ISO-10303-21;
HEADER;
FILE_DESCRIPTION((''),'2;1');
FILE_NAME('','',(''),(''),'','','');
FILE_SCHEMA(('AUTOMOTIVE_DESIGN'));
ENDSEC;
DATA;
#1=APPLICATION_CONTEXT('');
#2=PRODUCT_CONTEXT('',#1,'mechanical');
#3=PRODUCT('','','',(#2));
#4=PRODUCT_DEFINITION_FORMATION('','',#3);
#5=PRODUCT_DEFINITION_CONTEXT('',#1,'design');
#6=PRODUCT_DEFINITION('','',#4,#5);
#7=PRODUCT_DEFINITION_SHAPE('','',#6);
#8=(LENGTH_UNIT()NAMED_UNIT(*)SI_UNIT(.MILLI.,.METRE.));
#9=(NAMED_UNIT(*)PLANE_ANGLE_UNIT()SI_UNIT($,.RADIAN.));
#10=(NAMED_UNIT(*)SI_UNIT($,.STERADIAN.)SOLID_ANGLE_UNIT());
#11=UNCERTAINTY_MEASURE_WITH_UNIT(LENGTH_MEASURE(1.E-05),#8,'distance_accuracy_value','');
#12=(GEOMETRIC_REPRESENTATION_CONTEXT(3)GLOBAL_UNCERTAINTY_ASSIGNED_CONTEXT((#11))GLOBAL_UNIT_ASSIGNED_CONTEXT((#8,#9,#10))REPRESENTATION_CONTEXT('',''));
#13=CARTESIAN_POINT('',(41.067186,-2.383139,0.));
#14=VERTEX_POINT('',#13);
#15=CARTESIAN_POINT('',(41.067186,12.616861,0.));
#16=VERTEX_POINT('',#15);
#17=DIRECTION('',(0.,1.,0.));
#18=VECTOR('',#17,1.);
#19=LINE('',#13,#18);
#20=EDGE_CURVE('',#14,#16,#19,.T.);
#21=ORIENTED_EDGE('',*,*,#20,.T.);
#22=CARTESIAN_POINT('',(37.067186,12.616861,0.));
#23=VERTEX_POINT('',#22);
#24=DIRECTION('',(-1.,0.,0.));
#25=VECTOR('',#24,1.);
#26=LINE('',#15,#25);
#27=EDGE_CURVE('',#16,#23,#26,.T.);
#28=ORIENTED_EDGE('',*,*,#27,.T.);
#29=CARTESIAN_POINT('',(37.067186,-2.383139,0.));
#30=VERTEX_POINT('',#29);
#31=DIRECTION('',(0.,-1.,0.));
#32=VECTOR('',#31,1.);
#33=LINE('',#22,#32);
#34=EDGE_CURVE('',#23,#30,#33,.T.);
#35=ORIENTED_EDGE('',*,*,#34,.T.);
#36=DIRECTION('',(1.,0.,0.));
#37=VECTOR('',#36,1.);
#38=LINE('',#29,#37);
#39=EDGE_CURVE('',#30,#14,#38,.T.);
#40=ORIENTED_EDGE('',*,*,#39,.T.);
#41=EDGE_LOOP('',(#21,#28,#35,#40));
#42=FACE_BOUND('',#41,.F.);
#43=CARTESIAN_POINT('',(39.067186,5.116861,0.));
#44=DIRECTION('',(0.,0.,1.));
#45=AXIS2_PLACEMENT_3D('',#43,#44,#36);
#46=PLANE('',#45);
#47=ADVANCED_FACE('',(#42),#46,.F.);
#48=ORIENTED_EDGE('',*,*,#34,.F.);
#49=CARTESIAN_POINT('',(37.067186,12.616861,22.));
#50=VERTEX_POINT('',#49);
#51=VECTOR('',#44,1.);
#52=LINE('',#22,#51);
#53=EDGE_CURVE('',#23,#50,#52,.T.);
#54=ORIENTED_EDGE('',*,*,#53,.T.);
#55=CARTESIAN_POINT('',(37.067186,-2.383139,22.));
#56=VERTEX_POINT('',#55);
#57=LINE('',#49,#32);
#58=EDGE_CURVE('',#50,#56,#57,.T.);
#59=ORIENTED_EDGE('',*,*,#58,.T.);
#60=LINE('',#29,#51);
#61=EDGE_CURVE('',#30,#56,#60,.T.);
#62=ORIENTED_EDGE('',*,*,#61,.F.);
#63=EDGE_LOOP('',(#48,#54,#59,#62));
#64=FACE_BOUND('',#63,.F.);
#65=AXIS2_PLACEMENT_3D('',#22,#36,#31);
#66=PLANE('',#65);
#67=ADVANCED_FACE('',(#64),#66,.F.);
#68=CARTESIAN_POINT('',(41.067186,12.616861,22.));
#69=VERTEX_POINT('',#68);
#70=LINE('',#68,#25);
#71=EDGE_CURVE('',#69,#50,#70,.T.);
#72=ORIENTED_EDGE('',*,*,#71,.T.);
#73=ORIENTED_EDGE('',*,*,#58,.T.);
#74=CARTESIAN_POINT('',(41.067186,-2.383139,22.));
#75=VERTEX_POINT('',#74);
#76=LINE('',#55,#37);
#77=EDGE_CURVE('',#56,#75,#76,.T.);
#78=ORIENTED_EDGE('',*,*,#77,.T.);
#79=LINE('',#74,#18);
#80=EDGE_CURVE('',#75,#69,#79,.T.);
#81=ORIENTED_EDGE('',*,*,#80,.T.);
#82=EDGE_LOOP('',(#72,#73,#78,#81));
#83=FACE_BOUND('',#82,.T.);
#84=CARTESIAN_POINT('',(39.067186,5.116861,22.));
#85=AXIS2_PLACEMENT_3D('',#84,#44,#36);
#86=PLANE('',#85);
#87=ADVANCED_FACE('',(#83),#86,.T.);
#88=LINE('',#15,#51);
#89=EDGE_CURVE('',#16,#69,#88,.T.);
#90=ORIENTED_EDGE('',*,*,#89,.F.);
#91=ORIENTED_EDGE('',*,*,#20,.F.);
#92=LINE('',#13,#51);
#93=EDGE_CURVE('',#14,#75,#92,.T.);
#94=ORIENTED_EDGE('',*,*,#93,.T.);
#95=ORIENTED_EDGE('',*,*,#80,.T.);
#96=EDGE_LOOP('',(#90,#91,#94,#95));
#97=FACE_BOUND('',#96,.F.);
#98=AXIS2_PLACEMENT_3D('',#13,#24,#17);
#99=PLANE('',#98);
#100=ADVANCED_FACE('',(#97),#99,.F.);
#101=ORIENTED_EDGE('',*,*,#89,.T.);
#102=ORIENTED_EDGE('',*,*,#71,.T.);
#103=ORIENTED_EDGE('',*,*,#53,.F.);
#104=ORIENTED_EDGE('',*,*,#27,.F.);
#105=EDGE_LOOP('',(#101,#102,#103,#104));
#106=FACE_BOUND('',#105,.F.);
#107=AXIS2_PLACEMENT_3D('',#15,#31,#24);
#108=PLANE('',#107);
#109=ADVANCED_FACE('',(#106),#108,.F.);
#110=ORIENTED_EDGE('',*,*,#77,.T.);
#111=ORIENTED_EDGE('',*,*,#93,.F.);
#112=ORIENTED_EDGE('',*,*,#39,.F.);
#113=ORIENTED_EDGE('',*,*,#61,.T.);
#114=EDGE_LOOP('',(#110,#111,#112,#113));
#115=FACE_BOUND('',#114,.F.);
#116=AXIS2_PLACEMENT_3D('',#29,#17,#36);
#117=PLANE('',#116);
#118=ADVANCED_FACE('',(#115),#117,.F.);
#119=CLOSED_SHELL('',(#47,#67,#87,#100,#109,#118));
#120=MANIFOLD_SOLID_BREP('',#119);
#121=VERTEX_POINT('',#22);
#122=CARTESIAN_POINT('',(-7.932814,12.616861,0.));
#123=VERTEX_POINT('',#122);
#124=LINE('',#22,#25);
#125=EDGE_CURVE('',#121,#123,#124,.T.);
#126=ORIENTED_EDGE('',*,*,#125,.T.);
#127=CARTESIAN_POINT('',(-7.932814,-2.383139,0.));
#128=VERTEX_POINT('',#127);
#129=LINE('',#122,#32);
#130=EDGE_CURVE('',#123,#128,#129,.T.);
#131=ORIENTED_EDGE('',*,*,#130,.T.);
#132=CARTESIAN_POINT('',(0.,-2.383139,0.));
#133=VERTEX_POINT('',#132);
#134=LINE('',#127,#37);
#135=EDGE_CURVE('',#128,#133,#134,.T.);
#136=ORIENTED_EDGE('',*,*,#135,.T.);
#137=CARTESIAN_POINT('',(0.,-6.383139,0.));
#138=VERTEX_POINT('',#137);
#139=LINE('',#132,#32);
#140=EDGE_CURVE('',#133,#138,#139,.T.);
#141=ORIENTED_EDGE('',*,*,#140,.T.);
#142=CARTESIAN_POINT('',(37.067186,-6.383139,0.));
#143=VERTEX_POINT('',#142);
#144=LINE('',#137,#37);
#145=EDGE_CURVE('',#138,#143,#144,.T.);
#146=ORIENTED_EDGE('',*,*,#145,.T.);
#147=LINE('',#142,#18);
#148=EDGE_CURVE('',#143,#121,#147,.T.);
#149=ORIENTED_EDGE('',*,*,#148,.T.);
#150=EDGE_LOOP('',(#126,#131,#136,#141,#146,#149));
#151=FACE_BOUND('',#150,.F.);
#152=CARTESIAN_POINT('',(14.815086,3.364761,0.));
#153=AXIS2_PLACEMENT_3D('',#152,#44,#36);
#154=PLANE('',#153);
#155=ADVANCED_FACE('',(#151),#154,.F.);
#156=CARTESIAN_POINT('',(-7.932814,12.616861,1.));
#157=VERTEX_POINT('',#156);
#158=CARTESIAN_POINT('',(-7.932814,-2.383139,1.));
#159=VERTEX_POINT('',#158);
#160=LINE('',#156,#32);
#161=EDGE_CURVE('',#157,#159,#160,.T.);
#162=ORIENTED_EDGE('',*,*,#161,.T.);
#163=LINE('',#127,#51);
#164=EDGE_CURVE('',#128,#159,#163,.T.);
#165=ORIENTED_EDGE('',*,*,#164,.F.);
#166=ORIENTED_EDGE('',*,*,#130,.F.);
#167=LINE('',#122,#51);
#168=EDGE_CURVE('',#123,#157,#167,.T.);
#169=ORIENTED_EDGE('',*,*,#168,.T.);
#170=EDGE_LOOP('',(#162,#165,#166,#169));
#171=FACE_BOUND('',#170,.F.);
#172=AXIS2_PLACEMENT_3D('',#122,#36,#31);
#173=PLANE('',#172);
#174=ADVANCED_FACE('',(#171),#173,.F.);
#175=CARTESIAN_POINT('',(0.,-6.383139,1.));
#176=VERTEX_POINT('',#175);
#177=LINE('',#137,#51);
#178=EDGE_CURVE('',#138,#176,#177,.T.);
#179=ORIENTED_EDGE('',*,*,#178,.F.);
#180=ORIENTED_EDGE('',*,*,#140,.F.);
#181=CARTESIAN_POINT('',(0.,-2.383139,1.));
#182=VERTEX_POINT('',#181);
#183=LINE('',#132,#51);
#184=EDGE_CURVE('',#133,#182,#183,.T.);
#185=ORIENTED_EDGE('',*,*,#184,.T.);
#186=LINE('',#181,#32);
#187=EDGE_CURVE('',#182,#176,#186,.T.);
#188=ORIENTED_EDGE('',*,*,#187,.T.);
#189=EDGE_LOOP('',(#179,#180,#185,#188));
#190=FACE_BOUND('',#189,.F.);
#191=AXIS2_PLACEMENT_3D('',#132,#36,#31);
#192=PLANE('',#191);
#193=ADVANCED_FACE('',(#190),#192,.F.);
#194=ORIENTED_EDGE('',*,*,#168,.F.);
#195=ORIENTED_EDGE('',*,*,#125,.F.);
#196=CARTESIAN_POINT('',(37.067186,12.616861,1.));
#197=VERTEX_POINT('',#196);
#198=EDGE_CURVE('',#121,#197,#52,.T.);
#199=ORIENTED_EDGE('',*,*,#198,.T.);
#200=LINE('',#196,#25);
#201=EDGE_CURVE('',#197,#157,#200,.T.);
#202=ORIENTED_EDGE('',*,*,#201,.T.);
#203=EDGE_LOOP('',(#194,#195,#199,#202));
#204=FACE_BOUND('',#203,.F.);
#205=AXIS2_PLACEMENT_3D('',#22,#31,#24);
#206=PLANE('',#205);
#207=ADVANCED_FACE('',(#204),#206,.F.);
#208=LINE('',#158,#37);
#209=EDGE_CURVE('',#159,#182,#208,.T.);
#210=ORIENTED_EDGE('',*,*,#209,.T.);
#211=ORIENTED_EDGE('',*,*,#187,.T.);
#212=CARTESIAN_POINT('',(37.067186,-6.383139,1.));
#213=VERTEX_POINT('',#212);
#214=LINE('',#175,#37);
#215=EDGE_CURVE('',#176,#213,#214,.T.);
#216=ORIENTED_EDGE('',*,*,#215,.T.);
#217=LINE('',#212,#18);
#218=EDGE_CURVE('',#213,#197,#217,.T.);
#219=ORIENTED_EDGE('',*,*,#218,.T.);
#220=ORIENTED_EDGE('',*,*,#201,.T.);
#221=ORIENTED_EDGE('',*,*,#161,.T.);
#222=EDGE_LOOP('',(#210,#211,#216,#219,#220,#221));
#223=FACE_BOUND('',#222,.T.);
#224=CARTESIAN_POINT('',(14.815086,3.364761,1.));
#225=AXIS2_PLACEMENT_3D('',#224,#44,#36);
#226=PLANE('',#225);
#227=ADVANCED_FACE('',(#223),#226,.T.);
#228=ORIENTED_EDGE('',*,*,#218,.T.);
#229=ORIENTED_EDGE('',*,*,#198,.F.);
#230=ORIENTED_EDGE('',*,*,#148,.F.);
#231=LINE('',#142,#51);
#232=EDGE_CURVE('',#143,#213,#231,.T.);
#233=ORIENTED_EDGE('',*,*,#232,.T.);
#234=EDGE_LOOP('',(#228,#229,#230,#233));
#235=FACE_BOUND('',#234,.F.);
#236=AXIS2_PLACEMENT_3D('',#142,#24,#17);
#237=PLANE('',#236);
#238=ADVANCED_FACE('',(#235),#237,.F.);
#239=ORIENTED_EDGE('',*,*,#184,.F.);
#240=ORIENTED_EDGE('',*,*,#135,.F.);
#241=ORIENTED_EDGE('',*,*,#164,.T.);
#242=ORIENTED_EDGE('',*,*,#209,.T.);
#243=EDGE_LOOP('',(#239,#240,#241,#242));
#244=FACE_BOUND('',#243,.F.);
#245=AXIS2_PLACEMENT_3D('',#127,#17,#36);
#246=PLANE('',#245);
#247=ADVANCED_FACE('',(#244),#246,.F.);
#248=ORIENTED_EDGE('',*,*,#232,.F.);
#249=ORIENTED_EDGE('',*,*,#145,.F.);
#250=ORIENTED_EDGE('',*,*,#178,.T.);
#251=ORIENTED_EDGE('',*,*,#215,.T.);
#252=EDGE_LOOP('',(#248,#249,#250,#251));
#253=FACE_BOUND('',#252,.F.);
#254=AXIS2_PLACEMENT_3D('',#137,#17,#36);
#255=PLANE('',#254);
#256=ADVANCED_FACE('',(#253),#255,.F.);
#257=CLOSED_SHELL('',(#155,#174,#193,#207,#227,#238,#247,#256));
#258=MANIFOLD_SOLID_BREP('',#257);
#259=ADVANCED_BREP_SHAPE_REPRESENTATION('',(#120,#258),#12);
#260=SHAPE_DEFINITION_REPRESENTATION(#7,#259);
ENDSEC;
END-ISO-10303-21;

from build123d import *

# Parameters (mm, degrees)
F1_DEPTH = 22
F2_DEPTH = 1


with BuildPart() as f1:
    # F0 (on Top) → F1 (new body)
    with BuildSketch(Plane.XY):
        Polygon((41.0671858334, 12.6168608051), (37.0671858334, 12.6168608051), (37.0671858334, 8.6168608051), (37.0671858334, -2.3831391949), (41.0671858334, -2.3831391949), align=None)
    extrude(amount=F1_DEPTH)


with BuildPart() as f2:
    # F0 (on Top) → F2 (new body)
    with BuildSketch(Plane.XY):
        Polygon((37.0671858334, 12.6168608051), (-7.9328141666, 12.6168608051), (-7.9328141666, -2.3831391949), (0, -2.3831391949), (0, -6.3831391949), (37.0671858334, -6.3831391949), (37.0671858334, -2.3831391949), (37.0671858334, 8.6168608051), align=None)
    extrude(amount=F2_DEPTH)


solid = Compound([f1.part, f2.part])
